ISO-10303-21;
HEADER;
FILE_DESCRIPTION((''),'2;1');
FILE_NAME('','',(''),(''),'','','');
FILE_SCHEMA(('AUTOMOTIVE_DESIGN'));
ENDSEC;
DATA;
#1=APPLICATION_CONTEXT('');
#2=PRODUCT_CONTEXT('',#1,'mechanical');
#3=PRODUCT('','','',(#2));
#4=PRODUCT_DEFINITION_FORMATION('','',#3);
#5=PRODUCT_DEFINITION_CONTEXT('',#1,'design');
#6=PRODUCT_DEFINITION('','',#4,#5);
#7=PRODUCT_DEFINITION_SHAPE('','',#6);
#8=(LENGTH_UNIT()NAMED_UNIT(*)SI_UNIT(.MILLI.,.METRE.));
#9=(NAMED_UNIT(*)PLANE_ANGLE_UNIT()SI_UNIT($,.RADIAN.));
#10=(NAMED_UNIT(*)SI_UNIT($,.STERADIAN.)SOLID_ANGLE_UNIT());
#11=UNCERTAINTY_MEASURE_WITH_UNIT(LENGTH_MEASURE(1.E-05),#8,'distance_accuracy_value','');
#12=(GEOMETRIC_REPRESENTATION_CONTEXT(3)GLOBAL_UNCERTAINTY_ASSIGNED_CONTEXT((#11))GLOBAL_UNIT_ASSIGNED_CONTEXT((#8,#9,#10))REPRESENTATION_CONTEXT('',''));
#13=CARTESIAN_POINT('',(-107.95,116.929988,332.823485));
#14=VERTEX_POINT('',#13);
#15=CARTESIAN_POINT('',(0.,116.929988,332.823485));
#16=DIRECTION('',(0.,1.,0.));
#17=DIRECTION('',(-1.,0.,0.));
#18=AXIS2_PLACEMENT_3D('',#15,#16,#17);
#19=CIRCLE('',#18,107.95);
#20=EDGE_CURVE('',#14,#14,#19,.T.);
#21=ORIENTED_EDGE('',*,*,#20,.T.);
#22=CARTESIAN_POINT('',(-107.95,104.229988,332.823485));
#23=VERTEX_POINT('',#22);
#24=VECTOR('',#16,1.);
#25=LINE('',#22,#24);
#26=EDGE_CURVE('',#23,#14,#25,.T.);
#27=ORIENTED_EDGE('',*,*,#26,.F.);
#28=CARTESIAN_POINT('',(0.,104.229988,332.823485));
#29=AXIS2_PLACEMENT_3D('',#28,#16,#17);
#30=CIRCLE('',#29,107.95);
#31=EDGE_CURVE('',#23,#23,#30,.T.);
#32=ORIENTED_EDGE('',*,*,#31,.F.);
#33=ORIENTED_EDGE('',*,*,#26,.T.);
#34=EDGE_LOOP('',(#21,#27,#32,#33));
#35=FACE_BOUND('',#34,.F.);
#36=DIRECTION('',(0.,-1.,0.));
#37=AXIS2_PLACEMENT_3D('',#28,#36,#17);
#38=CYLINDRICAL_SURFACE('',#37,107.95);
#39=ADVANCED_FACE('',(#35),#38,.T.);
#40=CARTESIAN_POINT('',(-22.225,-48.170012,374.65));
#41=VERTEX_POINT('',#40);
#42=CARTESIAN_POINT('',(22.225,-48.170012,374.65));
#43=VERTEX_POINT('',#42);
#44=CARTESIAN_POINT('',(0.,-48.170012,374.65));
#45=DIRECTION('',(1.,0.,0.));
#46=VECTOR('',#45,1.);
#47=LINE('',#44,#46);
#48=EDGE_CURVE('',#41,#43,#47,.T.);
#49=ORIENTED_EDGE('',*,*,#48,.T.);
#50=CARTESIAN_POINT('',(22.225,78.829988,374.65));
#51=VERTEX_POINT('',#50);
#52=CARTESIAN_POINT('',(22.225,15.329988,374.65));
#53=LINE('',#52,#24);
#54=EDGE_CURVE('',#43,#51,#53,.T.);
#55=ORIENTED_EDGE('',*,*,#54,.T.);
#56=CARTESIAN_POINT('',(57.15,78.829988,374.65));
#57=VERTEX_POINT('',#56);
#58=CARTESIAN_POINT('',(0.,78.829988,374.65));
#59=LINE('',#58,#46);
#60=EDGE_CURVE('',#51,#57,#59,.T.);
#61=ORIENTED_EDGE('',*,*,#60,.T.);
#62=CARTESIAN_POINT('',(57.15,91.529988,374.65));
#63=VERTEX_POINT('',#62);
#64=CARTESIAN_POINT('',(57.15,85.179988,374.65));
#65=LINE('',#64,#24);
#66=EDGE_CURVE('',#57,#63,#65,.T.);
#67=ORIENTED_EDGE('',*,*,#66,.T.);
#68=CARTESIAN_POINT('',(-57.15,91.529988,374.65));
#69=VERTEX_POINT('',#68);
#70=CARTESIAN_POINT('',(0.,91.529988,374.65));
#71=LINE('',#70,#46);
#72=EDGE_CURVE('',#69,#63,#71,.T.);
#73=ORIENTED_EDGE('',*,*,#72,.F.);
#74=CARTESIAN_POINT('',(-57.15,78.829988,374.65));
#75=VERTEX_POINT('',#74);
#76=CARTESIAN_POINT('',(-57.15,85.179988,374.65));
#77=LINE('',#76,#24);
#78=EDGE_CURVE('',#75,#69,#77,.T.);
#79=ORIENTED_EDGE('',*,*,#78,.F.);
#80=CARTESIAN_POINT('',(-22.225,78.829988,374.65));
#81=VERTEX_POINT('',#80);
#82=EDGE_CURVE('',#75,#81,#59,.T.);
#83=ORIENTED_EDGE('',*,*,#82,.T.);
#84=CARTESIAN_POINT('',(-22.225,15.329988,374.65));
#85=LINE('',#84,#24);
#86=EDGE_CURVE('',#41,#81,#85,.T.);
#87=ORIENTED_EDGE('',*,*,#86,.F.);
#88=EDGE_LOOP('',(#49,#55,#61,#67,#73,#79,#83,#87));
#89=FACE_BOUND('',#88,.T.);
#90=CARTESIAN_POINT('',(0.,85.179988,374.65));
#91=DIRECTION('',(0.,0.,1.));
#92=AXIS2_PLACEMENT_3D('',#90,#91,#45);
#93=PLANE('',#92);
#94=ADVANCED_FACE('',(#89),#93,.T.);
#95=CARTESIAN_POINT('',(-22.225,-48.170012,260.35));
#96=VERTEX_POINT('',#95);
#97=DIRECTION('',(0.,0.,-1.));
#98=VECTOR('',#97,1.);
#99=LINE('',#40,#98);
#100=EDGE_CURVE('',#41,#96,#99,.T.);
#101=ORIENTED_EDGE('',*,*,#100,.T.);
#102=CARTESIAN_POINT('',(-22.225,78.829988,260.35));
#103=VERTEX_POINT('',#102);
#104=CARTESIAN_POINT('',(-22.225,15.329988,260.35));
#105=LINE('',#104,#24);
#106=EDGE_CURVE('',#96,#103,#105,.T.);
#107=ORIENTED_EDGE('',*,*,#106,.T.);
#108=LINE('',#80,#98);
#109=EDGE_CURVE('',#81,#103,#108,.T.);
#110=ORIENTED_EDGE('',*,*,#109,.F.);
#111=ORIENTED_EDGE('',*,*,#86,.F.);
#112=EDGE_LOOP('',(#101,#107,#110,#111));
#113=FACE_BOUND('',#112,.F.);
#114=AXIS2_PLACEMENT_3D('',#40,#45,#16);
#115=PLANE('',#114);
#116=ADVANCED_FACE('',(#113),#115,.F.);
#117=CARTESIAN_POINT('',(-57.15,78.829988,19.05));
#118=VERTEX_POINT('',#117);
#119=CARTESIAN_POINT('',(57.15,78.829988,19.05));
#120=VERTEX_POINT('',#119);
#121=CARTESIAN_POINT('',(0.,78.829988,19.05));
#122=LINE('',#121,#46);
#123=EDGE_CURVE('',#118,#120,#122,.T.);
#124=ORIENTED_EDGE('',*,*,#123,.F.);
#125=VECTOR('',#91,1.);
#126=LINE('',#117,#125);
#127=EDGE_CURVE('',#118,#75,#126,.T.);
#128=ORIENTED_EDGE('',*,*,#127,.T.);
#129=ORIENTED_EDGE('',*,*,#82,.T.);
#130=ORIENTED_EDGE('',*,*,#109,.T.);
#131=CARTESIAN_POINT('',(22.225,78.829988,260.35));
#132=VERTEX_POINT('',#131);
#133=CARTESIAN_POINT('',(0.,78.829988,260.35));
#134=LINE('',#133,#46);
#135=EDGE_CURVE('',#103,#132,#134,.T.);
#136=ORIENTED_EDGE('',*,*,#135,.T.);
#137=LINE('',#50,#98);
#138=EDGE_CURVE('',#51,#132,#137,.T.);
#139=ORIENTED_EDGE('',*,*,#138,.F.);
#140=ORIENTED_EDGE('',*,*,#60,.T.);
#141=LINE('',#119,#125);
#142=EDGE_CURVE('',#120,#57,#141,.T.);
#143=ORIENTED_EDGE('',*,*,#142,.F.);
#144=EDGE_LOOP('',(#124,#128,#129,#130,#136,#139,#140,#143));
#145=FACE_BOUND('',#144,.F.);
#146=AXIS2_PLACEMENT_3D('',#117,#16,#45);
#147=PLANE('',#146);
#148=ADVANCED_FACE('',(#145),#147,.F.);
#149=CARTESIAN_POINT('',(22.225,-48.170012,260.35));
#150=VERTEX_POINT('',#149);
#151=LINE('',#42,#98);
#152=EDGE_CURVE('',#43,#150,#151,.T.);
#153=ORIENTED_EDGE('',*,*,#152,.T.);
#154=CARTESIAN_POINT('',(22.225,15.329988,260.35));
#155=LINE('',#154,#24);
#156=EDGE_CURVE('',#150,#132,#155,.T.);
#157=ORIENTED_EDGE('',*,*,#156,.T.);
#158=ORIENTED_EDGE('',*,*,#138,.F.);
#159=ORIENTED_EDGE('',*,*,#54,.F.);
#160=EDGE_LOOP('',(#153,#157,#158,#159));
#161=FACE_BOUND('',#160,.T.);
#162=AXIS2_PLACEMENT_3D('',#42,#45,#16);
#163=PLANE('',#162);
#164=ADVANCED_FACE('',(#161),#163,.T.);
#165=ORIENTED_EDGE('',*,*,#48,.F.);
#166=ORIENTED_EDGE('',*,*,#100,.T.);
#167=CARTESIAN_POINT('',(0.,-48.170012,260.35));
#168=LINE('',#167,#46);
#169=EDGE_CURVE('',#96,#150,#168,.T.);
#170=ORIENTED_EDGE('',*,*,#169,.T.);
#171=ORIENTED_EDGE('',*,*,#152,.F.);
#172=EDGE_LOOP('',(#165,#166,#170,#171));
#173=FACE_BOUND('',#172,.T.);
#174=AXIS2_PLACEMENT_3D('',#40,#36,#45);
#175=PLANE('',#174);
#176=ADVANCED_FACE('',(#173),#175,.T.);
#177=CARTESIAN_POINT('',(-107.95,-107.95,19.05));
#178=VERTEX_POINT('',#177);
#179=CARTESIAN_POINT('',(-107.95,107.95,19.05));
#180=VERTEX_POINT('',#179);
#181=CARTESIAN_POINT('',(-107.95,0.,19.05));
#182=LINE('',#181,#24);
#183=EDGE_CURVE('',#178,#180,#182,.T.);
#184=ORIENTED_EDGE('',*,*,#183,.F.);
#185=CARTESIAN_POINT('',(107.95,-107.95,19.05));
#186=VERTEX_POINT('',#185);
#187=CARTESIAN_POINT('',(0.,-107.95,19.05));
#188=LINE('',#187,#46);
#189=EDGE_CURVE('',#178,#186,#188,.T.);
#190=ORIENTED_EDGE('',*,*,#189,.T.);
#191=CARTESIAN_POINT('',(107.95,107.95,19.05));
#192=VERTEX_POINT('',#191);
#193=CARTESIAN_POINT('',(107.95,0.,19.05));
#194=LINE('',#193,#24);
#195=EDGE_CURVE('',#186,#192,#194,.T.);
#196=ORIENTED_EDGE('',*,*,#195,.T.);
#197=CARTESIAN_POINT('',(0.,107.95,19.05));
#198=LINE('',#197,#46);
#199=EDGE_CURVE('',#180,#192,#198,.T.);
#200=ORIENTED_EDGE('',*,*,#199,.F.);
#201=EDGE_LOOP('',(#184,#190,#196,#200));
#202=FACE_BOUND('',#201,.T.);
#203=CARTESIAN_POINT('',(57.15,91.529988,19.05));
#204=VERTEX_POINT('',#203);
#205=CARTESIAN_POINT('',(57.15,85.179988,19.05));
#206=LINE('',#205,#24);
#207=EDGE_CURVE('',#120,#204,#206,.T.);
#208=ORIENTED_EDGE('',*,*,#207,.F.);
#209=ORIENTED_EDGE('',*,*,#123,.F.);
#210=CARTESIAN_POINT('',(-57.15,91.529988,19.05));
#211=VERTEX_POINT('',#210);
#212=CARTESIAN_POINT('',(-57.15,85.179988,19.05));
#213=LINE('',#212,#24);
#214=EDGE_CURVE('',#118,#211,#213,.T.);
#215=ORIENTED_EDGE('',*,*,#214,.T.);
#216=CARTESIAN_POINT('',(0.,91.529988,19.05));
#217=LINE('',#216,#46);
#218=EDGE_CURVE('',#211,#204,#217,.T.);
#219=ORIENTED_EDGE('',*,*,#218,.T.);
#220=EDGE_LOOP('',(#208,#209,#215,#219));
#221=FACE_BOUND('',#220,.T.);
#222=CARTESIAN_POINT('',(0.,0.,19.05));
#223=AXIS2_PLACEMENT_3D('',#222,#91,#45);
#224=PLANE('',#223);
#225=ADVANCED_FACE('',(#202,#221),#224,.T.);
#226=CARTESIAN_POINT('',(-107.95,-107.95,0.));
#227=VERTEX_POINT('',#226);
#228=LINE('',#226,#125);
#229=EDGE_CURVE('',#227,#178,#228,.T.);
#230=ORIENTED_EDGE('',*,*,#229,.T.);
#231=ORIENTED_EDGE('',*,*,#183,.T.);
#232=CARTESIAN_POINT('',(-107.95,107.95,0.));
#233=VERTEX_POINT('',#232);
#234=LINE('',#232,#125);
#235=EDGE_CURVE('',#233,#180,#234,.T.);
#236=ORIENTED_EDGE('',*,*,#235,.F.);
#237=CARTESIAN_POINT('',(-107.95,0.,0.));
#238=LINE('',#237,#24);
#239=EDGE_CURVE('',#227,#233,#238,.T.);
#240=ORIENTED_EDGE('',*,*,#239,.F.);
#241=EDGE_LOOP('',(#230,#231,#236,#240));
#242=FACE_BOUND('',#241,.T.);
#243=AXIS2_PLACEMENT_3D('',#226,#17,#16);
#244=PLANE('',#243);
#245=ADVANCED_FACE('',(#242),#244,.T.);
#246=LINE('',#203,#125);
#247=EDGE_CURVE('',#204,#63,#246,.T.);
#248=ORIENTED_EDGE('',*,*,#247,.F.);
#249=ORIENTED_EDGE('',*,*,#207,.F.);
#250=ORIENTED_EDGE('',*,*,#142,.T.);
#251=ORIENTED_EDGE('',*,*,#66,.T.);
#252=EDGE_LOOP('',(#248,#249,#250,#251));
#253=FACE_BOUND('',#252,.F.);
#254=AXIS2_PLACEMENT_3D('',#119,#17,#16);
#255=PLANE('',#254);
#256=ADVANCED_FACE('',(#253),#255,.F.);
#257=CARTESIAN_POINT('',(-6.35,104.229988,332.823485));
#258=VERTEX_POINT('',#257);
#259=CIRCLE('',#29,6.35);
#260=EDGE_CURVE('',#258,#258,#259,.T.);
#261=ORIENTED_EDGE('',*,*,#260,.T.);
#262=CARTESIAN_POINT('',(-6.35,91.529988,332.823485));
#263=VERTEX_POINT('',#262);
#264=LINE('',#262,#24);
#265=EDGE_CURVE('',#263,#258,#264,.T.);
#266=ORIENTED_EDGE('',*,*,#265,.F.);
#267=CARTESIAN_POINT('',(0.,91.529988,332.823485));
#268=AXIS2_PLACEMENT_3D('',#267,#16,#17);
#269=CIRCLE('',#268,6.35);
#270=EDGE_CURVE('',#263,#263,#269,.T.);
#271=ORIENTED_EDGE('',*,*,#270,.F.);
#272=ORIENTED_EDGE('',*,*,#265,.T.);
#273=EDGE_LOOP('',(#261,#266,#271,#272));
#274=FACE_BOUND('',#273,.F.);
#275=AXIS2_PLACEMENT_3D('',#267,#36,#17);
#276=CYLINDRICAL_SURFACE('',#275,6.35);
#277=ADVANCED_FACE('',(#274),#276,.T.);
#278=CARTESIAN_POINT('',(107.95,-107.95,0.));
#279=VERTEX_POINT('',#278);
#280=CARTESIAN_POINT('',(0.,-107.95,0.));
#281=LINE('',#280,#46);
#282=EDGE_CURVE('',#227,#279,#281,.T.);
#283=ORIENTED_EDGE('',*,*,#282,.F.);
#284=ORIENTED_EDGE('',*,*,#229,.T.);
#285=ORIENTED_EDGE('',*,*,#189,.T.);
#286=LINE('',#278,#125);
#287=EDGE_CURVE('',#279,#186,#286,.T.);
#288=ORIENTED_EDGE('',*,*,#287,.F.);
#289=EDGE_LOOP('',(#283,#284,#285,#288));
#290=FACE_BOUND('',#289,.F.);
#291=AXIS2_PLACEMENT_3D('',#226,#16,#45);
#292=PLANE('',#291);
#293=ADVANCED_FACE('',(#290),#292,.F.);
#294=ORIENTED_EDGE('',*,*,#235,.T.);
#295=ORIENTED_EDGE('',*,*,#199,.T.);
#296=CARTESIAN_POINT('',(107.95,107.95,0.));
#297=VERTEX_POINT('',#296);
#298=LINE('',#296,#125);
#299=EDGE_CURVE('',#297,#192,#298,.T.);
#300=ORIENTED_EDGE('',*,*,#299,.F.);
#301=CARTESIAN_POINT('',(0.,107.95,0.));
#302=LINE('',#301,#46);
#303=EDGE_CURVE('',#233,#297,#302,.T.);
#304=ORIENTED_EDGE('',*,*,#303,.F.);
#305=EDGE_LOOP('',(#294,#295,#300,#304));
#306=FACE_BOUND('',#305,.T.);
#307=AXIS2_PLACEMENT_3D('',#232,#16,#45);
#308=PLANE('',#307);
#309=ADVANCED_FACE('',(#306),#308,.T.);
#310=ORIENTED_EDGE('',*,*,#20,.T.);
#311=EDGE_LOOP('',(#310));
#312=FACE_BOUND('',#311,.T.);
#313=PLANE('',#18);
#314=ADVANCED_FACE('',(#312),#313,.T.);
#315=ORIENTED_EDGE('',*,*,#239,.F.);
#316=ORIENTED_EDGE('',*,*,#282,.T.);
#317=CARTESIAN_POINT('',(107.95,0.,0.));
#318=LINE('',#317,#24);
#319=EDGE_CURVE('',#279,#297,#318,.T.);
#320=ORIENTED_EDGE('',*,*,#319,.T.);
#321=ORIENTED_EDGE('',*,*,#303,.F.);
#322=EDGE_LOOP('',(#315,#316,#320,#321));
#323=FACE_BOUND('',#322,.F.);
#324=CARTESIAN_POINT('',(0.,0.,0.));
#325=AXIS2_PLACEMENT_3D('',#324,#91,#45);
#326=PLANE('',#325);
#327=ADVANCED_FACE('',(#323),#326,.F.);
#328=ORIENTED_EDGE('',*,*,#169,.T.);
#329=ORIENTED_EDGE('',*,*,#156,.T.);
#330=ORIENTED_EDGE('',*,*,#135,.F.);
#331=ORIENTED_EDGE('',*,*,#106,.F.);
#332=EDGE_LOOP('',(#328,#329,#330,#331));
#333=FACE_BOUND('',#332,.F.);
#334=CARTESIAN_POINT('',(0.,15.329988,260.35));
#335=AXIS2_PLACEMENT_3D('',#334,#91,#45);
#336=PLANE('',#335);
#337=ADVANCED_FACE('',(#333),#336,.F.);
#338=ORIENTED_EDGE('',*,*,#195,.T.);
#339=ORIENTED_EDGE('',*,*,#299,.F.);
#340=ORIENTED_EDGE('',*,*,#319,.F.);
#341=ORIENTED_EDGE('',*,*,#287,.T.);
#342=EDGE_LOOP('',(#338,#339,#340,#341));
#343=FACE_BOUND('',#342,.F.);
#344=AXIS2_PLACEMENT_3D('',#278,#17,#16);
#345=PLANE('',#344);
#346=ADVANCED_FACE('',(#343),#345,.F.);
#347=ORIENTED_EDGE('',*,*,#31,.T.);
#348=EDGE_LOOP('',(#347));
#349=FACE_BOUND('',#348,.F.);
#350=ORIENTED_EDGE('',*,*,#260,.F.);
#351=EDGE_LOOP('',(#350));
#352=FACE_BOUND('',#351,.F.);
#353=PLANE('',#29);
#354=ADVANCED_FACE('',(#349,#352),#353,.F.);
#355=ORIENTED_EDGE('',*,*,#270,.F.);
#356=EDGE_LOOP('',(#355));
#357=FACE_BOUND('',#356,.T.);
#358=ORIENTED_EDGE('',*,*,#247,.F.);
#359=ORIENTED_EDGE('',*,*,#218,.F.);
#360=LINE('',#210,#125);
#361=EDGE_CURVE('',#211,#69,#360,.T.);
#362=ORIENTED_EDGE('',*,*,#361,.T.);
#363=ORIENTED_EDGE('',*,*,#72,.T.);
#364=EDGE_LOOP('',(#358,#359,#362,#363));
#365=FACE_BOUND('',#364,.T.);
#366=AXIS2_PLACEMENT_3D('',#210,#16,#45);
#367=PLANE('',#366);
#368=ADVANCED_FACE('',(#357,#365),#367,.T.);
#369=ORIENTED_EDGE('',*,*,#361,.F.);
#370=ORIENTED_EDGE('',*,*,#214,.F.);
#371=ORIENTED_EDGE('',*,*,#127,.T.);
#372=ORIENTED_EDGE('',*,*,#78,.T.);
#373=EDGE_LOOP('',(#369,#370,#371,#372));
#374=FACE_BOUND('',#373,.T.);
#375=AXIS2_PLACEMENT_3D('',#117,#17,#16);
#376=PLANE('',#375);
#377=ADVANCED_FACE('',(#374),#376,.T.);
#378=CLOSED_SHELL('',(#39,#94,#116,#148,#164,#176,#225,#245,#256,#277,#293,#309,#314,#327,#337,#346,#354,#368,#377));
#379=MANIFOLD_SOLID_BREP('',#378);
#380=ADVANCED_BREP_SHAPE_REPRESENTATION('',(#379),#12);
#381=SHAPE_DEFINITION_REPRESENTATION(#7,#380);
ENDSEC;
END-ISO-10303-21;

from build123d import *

# Parameters (mm, degrees)
F0_W      = 215.9
F0_H      = 215.9
F1_DEPTH  = 19.05
F3_W      = 114.3
F3_H      = 12.7
F4_DEPTH  = 355.6
F5_W      = 44.45
F5_H      = 127
F6_DEPTH  = 114.3
F9_R      = 6.35
F10_DEPTH = 12.7
F11_R     = 107.95
F12_DEPTH = 12.7


# Not quite as in the source:
# - a feature of the source that left no trace in its solid (it failed there, or was rolled back) is left out


with BuildPart() as f1:
    # F0 (on Top) → F1 (new body)
    with BuildSketch(Plane.XY):
        Rectangle(F0_W, F0_H)
    extrude(amount=F1_DEPTH)

    # F3 (on face) → F4 (join)
    with BuildSketch(Plane.XY.offset(19.05)):
        with Locations((0, 85.1799877524)):
            Rectangle(F3_W, F3_H)
    extrude(amount=F4_DEPTH)

    # F5 (on face) → F6 (join)
    with BuildSketch(Plane.XY.offset(374.65)):
        with Locations((0, 15.3299877524)):
            Rectangle(F5_W, F5_H)
    extrude(amount=-F6_DEPTH)

    # F9 (on face) → F10 (join)
    with BuildSketch(Plane(origin=(0, 91.5299877524, 0), x_dir=(-1, 0, 0), z_dir=(0, 1, 0))):
        with Locations((0, 332.823485136)):
            Circle(F9_R)
    extrude(amount=F10_DEPTH)

    # F11 (on face) → F12 (join)
    with BuildSketch(Plane(origin=(0, 104.2299877524, 0), x_dir=(-1, 0, 0), z_dir=(0, 1, 0))):
        with Locations((0, 332.823485136)):
            Circle(F11_R)
    extrude(amount=F12_DEPTH)


solid = f1.part
